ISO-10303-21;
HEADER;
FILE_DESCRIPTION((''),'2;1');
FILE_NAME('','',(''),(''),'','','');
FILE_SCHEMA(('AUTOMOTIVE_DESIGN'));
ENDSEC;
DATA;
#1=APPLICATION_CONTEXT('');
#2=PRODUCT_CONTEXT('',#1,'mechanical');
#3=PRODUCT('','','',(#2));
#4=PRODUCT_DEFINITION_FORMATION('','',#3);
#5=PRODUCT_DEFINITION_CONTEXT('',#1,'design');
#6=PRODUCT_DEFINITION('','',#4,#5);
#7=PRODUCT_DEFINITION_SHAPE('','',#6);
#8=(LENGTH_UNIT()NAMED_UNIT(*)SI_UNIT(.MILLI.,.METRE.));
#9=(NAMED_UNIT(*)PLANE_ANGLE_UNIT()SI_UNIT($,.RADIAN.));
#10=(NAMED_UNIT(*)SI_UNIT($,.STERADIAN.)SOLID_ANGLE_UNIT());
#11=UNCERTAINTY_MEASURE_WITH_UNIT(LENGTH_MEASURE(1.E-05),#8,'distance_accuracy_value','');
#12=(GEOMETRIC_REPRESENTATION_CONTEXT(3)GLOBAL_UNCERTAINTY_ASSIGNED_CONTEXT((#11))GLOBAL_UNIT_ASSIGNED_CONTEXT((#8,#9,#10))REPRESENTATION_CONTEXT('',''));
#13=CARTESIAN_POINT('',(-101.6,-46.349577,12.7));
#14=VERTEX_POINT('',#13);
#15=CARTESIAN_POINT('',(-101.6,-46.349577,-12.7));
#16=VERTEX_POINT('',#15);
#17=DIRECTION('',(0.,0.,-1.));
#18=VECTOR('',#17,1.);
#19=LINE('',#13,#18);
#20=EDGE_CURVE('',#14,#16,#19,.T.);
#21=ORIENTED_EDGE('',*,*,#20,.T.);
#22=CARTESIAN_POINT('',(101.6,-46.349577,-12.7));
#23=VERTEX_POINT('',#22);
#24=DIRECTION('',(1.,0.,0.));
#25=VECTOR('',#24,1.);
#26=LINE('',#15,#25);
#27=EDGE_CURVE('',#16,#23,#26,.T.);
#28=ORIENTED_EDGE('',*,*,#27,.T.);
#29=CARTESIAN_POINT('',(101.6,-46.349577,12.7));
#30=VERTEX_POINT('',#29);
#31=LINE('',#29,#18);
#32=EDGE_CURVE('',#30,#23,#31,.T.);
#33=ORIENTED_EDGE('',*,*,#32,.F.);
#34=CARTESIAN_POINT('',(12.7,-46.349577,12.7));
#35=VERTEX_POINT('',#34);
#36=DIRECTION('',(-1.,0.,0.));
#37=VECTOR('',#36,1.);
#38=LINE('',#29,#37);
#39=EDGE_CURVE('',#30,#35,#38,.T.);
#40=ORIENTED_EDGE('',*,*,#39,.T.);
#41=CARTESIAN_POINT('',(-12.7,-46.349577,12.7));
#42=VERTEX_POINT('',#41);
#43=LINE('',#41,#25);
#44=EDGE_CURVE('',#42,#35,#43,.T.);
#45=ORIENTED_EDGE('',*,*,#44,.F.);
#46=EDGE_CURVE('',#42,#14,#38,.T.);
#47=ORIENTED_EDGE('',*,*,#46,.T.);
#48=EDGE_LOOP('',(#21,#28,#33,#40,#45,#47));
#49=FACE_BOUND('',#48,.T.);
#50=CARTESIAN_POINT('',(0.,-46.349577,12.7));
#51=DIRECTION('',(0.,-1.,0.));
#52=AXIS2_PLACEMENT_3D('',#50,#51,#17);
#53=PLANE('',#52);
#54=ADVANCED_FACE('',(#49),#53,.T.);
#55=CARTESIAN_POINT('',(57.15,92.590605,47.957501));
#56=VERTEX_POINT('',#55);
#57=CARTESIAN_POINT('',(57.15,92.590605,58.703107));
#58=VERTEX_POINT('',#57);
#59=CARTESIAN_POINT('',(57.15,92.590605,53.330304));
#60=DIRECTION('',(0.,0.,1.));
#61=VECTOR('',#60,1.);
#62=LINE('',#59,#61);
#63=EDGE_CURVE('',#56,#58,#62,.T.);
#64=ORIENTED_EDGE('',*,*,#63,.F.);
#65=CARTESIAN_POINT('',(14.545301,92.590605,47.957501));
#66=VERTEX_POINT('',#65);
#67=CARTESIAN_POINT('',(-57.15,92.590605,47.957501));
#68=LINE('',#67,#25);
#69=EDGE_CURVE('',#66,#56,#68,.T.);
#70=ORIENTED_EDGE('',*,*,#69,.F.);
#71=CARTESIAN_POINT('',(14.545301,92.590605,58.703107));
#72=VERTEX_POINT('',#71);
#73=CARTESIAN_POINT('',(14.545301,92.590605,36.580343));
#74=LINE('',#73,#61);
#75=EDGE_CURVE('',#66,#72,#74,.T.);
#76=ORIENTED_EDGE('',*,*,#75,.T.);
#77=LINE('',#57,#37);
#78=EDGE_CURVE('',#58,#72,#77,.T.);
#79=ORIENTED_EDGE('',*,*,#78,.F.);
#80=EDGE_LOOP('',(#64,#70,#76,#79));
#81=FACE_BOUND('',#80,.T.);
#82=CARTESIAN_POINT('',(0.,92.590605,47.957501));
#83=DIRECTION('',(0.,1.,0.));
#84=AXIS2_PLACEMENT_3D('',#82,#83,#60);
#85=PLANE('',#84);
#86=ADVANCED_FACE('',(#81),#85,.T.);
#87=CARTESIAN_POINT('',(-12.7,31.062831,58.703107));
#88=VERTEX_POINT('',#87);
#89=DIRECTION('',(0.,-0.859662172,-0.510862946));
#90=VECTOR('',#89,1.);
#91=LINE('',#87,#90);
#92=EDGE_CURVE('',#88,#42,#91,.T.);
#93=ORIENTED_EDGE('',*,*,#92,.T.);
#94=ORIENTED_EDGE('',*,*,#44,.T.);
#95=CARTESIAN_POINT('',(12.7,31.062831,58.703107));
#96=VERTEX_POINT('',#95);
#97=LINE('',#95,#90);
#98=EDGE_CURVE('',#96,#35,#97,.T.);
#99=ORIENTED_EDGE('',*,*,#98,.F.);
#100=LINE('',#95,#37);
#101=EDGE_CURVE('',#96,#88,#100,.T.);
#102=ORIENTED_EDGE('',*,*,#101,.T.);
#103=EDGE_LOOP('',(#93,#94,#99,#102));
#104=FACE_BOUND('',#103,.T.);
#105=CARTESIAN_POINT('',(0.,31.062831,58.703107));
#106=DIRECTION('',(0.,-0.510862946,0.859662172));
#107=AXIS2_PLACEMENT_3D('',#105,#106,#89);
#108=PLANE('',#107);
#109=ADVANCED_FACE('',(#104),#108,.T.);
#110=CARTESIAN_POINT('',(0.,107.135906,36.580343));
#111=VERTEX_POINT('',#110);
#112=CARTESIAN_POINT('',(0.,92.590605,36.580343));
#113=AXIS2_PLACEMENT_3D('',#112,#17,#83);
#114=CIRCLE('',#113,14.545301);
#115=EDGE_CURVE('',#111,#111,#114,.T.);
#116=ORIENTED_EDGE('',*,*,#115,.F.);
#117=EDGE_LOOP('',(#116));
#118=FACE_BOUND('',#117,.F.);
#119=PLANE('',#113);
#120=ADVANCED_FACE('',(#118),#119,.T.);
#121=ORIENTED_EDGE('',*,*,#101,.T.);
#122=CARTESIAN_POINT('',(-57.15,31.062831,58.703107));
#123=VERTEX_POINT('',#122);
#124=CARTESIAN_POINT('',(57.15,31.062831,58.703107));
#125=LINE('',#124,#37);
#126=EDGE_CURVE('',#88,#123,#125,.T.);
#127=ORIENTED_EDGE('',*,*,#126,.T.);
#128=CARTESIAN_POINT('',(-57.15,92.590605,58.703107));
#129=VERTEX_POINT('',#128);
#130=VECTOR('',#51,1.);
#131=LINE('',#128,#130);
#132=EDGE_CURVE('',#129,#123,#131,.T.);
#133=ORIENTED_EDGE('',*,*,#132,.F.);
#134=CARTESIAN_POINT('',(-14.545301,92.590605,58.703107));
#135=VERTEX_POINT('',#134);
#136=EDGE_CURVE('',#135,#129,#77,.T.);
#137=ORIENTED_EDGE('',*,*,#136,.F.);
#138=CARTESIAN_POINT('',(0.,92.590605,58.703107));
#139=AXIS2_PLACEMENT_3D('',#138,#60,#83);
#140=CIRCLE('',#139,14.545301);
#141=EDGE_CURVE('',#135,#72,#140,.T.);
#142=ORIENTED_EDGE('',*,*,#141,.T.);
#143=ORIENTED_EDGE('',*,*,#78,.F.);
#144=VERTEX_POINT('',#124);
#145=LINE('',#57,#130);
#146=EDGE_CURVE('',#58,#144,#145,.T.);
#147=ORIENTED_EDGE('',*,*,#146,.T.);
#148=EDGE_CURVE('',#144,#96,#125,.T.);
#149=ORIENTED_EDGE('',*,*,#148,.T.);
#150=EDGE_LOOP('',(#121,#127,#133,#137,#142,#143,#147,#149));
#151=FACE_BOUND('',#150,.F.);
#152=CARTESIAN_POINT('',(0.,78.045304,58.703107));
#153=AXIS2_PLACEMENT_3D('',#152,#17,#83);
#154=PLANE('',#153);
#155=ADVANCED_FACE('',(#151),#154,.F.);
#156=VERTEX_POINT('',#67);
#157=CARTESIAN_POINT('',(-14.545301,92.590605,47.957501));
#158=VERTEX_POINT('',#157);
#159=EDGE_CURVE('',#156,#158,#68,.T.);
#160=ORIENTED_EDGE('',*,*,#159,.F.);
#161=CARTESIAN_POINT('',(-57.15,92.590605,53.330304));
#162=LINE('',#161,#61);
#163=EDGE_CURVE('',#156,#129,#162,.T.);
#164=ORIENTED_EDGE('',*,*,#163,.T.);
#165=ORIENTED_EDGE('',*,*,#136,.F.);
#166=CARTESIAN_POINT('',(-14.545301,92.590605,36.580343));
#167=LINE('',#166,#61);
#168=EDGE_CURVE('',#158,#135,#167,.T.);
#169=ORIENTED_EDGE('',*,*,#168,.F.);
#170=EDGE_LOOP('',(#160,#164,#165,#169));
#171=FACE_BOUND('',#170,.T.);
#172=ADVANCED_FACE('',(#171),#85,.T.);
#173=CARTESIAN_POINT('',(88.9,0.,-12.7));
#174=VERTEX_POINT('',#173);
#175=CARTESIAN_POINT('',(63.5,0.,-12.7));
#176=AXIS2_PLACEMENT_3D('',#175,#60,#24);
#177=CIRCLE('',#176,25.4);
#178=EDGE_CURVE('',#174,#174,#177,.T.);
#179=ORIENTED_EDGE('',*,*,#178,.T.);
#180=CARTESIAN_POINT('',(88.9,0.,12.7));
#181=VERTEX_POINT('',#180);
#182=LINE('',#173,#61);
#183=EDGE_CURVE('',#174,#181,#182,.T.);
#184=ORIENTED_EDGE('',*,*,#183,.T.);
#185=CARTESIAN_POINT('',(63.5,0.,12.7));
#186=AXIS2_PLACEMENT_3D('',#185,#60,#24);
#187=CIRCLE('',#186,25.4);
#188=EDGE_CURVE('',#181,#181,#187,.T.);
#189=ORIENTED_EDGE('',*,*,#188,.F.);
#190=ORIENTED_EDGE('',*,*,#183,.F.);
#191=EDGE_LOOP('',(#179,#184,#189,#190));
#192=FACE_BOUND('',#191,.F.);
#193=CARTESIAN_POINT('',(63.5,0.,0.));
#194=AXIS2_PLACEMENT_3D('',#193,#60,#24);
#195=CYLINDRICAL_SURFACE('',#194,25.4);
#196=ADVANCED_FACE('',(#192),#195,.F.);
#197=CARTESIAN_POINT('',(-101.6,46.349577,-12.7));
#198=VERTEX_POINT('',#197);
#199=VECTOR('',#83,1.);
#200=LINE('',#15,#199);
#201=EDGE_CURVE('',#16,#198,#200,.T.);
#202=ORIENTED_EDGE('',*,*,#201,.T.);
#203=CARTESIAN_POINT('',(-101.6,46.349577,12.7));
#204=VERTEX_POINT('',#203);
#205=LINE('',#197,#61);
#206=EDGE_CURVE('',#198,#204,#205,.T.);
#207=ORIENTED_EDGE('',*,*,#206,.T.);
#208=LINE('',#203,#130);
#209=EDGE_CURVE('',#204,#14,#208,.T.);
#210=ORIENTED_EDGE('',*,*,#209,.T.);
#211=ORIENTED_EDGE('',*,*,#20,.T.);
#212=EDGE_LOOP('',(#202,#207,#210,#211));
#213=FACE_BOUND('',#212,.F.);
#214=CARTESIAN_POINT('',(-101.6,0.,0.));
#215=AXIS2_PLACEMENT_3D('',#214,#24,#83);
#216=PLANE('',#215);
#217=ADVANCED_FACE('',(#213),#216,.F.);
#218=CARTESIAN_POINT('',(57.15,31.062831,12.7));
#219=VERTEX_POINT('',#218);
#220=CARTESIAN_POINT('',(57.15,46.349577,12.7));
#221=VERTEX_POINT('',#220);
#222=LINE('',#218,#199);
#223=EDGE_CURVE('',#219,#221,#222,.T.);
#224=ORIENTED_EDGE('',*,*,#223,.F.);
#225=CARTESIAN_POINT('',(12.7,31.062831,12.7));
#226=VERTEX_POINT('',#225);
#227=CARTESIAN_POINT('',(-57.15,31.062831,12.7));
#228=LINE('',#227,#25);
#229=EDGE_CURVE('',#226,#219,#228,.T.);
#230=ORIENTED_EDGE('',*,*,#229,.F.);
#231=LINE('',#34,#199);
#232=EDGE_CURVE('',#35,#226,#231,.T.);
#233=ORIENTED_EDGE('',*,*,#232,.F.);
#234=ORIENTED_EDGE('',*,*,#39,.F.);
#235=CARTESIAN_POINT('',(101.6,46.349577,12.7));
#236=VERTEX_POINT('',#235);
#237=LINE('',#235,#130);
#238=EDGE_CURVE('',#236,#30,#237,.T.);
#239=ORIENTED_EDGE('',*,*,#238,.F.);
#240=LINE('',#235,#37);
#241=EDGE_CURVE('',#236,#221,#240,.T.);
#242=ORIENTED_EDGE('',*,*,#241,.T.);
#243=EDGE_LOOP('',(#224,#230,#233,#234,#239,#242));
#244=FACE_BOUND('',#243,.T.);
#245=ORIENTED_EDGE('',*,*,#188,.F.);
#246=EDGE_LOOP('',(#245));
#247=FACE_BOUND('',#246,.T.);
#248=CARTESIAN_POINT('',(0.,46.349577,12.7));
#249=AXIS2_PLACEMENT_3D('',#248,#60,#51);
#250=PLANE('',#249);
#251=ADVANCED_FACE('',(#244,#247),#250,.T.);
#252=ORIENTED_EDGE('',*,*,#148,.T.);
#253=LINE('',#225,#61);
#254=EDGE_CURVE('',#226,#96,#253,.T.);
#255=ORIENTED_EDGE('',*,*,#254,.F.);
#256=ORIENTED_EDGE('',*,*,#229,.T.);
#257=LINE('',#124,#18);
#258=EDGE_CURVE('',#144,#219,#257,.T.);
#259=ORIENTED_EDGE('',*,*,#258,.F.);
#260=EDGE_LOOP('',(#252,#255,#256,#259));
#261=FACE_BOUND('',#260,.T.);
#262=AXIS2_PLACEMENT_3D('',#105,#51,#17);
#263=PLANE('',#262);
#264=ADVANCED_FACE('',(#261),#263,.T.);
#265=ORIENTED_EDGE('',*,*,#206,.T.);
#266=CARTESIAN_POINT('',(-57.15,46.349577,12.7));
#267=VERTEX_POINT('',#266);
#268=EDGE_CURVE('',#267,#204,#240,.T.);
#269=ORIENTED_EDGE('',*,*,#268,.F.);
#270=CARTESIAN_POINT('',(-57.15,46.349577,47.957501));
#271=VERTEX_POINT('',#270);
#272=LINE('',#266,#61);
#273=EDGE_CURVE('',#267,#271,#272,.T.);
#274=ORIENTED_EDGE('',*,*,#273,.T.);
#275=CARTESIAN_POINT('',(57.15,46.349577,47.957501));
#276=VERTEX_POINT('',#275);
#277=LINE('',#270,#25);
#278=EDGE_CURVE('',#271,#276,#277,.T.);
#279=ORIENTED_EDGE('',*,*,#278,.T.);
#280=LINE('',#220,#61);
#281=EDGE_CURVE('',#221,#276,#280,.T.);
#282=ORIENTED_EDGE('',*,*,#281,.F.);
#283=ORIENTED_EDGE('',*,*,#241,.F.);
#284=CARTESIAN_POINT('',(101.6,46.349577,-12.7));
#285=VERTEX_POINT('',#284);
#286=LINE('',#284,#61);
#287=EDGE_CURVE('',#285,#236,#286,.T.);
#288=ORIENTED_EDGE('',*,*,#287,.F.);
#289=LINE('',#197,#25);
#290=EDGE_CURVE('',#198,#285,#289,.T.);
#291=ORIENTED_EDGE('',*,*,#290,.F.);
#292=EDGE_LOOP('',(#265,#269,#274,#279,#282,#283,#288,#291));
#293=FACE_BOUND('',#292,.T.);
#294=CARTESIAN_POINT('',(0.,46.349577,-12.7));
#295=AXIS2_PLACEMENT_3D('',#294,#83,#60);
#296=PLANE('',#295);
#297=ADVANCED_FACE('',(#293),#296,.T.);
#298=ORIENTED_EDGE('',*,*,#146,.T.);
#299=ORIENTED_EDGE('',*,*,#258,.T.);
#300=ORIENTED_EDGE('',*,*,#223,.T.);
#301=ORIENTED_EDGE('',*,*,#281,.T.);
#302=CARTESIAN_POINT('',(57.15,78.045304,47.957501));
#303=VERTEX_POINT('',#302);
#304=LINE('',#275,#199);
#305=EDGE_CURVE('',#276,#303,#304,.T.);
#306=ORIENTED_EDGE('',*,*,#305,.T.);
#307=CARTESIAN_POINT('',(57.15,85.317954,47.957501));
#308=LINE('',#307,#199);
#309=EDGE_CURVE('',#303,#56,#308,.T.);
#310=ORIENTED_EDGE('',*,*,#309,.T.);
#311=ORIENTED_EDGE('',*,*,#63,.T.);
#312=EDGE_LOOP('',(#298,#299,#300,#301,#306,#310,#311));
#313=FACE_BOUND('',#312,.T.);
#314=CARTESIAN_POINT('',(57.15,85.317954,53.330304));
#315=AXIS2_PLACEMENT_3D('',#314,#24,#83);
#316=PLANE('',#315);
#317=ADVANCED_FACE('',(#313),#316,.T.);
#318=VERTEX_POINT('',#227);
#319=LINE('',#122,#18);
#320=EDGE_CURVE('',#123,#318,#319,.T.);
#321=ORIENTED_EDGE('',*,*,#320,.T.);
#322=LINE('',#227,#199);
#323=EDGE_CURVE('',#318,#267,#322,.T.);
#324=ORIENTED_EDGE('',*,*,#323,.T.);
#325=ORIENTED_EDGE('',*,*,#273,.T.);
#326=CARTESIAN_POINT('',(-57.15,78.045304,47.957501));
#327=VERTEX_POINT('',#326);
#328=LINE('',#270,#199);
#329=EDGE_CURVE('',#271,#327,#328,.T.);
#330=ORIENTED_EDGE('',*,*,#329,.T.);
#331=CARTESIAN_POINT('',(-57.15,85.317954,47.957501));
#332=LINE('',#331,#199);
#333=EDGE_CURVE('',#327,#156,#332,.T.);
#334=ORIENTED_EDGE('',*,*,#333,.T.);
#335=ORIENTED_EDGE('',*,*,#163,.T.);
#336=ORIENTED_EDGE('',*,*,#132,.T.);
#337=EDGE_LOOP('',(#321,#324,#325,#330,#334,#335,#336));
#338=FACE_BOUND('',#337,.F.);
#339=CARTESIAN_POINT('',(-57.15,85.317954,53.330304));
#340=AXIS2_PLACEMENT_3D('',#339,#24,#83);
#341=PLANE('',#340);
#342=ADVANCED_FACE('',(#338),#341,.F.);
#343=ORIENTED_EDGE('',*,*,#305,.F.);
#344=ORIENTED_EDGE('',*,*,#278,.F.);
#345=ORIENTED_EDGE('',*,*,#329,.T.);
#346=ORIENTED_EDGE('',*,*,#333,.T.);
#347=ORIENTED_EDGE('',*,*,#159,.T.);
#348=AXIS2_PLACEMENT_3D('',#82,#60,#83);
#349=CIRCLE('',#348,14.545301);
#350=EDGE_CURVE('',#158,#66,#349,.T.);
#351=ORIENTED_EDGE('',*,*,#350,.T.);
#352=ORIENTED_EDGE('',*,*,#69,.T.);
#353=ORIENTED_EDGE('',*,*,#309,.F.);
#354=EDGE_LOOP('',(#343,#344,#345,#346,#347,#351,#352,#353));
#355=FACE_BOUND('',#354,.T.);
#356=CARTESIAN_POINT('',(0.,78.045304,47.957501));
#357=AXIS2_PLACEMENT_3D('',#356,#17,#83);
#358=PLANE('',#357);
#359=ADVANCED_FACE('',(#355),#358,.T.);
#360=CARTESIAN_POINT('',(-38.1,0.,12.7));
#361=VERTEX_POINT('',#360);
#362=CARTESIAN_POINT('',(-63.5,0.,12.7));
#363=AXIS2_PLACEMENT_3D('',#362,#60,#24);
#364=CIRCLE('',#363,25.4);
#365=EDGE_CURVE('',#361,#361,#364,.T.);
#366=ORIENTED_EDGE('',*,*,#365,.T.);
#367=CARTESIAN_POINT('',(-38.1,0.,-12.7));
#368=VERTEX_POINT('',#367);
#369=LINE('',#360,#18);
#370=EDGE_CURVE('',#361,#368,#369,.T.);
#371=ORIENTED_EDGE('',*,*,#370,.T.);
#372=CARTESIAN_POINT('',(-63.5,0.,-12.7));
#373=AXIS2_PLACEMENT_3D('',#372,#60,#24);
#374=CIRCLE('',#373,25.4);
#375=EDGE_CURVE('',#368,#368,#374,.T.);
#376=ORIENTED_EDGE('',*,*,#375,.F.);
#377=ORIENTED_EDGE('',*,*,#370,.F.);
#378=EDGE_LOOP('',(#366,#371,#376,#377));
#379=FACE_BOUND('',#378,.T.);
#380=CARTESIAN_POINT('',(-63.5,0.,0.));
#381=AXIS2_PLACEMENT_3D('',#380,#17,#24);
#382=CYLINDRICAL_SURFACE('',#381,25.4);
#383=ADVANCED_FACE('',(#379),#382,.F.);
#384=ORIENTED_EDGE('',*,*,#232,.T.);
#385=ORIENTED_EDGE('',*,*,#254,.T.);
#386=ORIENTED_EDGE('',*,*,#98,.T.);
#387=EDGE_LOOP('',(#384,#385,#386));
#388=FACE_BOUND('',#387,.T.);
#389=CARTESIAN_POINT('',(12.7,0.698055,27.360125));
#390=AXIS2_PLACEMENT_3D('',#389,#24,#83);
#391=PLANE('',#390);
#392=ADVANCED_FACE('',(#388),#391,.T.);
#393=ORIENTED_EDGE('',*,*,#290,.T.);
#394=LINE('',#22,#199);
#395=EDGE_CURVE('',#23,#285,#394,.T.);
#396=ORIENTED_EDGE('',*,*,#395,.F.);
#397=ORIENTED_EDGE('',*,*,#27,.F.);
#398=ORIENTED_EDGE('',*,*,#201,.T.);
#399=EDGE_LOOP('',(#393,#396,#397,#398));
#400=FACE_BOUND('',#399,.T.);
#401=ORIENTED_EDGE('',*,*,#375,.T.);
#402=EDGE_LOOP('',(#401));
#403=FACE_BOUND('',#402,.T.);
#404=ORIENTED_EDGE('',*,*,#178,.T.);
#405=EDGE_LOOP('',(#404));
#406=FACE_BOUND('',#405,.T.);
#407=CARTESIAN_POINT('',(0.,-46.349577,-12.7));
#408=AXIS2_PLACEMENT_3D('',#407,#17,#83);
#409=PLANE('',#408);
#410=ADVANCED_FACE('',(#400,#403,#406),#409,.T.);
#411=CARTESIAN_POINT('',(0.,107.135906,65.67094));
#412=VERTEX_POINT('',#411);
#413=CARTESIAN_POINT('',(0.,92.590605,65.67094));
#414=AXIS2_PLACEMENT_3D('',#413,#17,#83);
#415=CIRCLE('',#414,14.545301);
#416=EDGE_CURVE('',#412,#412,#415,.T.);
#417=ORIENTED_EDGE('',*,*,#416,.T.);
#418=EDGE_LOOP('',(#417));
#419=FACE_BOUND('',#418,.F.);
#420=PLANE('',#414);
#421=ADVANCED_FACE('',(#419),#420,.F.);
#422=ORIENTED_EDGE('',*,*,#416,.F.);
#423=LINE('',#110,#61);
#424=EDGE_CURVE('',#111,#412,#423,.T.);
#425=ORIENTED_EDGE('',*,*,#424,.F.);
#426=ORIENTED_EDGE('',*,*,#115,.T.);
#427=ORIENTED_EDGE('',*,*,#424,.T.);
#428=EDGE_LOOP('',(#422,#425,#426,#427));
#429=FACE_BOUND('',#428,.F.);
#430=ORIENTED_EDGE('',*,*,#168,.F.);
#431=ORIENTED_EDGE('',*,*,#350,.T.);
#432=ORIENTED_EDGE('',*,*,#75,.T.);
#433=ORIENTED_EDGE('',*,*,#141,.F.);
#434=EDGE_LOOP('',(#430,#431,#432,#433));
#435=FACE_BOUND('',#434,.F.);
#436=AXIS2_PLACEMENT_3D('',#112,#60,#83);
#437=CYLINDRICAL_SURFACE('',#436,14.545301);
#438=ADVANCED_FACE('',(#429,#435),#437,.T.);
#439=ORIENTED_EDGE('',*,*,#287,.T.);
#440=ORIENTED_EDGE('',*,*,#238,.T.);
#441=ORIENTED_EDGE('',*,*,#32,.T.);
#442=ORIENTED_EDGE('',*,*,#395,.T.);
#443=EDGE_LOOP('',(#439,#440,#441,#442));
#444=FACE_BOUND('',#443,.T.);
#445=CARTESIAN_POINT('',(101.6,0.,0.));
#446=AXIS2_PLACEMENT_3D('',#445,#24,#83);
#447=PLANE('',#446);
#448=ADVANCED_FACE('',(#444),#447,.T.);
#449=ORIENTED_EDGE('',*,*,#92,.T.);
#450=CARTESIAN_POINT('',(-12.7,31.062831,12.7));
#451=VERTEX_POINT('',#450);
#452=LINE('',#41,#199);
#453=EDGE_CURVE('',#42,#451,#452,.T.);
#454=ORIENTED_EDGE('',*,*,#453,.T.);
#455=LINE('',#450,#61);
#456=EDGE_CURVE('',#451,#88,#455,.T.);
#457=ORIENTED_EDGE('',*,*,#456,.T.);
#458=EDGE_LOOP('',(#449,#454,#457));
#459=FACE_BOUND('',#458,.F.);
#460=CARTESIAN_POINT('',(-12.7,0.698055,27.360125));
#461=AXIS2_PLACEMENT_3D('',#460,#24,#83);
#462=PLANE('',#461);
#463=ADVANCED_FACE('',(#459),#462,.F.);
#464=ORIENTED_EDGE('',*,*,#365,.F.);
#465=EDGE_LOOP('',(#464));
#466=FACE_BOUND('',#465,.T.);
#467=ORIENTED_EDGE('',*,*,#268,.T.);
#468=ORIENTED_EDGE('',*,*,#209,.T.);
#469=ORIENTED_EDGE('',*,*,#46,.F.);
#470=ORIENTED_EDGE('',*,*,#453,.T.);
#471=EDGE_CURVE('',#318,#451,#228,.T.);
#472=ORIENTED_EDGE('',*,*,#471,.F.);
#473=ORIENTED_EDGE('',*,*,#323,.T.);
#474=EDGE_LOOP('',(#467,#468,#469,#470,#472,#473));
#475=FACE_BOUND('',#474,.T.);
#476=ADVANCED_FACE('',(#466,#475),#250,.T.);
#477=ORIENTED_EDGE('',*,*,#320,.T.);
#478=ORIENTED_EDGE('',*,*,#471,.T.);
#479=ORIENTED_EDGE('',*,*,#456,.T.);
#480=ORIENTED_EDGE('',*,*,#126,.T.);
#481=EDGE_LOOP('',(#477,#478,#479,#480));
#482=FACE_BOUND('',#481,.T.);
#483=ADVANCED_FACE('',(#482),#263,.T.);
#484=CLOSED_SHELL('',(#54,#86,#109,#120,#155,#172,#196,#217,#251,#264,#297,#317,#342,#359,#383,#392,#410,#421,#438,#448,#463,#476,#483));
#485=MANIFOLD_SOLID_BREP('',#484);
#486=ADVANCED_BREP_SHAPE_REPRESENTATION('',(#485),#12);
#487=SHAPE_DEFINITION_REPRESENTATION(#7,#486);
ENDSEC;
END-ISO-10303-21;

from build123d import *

# Parameters (mm, degrees)
F1_DEPTH = 101.6
F2_DEPTH = 12.7
F3_DEPTH = 57.15
F0_W     = 14.5453011187
F0_H     = 10.745606224
F4_DEPTH = 57.15
F6_R     = 25.4
F7_DEPTH = 12.7


# Not quite as in the source:
# - a feature names something its author has since deleted; it is built from what else it names


with BuildPart() as f1:
    # F0 (on Right) → F1 (new body, symmetric)
    with BuildSketch(Plane.YZ):
        Polygon((31.0628309338, 12.7), (-46.3495767937, 12.7), (-46.3495767937, -12.7), (46.3495767937, -12.7), (46.3495767937, 12.7), align=None)
    extrude(amount=F1_DEPTH, both=True)

    # F0 (on Right) → F2 (join, symmetric)
    with BuildSketch(Plane.YZ):
        Polygon((31.0628309338, 58.703106785), (-46.3495767937, 12.7), (31.0628309338, 12.7), align=None)
    extrude(amount=F2_DEPTH, both=True)

    # F0 (on Right) → F3 (join, symmetric)
    with BuildSketch(Plane.YZ):
        Polygon((31.0628309338, 58.703106785), (31.0628309338, 12.7), (46.3495767937, 12.7), (46.3495767937, 47.9575005611), (78.0453036841, 47.9575005611), (78.0453036841, 58.703106785), align=None)
    extrude(amount=F3_DEPTH, both=True)

    # F0 (on Right) → F4 (join, symmetric)
    with BuildSketch(Plane.YZ):
        with Locations((85.3179542435, 53.330303673)):
            Rectangle(F0_W, F0_H)
    extrude(amount=F4_DEPTH, both=True)

    # F0 (on Right) → F5 (revolve)
    with BuildSketch(Plane.YZ):
        Polygon((92.5906048029, 65.6709397763), (92.5906048029, 58.703106785), (92.5906048029, 47.9575005611), (92.5906048029, 36.5803426697), (107.1359059216, 36.5803426697), (107.1359059216, 65.6709397763), align=None)
    revolve(axis=Axis((0, 92.5906048029, 51.125641223), (0, 0, -1)))

    # F6 (on Top) → F7 (cut, symmetric)
    with BuildSketch(Plane.XY):
        with Locations((-63.5, 0)):
            Circle(F6_R)
        with Locations((63.5, 0)):
            Circle(F6_R)
    extrude(amount=F7_DEPTH, both=True, mode=Mode.SUBTRACT)


solid = f1.part
